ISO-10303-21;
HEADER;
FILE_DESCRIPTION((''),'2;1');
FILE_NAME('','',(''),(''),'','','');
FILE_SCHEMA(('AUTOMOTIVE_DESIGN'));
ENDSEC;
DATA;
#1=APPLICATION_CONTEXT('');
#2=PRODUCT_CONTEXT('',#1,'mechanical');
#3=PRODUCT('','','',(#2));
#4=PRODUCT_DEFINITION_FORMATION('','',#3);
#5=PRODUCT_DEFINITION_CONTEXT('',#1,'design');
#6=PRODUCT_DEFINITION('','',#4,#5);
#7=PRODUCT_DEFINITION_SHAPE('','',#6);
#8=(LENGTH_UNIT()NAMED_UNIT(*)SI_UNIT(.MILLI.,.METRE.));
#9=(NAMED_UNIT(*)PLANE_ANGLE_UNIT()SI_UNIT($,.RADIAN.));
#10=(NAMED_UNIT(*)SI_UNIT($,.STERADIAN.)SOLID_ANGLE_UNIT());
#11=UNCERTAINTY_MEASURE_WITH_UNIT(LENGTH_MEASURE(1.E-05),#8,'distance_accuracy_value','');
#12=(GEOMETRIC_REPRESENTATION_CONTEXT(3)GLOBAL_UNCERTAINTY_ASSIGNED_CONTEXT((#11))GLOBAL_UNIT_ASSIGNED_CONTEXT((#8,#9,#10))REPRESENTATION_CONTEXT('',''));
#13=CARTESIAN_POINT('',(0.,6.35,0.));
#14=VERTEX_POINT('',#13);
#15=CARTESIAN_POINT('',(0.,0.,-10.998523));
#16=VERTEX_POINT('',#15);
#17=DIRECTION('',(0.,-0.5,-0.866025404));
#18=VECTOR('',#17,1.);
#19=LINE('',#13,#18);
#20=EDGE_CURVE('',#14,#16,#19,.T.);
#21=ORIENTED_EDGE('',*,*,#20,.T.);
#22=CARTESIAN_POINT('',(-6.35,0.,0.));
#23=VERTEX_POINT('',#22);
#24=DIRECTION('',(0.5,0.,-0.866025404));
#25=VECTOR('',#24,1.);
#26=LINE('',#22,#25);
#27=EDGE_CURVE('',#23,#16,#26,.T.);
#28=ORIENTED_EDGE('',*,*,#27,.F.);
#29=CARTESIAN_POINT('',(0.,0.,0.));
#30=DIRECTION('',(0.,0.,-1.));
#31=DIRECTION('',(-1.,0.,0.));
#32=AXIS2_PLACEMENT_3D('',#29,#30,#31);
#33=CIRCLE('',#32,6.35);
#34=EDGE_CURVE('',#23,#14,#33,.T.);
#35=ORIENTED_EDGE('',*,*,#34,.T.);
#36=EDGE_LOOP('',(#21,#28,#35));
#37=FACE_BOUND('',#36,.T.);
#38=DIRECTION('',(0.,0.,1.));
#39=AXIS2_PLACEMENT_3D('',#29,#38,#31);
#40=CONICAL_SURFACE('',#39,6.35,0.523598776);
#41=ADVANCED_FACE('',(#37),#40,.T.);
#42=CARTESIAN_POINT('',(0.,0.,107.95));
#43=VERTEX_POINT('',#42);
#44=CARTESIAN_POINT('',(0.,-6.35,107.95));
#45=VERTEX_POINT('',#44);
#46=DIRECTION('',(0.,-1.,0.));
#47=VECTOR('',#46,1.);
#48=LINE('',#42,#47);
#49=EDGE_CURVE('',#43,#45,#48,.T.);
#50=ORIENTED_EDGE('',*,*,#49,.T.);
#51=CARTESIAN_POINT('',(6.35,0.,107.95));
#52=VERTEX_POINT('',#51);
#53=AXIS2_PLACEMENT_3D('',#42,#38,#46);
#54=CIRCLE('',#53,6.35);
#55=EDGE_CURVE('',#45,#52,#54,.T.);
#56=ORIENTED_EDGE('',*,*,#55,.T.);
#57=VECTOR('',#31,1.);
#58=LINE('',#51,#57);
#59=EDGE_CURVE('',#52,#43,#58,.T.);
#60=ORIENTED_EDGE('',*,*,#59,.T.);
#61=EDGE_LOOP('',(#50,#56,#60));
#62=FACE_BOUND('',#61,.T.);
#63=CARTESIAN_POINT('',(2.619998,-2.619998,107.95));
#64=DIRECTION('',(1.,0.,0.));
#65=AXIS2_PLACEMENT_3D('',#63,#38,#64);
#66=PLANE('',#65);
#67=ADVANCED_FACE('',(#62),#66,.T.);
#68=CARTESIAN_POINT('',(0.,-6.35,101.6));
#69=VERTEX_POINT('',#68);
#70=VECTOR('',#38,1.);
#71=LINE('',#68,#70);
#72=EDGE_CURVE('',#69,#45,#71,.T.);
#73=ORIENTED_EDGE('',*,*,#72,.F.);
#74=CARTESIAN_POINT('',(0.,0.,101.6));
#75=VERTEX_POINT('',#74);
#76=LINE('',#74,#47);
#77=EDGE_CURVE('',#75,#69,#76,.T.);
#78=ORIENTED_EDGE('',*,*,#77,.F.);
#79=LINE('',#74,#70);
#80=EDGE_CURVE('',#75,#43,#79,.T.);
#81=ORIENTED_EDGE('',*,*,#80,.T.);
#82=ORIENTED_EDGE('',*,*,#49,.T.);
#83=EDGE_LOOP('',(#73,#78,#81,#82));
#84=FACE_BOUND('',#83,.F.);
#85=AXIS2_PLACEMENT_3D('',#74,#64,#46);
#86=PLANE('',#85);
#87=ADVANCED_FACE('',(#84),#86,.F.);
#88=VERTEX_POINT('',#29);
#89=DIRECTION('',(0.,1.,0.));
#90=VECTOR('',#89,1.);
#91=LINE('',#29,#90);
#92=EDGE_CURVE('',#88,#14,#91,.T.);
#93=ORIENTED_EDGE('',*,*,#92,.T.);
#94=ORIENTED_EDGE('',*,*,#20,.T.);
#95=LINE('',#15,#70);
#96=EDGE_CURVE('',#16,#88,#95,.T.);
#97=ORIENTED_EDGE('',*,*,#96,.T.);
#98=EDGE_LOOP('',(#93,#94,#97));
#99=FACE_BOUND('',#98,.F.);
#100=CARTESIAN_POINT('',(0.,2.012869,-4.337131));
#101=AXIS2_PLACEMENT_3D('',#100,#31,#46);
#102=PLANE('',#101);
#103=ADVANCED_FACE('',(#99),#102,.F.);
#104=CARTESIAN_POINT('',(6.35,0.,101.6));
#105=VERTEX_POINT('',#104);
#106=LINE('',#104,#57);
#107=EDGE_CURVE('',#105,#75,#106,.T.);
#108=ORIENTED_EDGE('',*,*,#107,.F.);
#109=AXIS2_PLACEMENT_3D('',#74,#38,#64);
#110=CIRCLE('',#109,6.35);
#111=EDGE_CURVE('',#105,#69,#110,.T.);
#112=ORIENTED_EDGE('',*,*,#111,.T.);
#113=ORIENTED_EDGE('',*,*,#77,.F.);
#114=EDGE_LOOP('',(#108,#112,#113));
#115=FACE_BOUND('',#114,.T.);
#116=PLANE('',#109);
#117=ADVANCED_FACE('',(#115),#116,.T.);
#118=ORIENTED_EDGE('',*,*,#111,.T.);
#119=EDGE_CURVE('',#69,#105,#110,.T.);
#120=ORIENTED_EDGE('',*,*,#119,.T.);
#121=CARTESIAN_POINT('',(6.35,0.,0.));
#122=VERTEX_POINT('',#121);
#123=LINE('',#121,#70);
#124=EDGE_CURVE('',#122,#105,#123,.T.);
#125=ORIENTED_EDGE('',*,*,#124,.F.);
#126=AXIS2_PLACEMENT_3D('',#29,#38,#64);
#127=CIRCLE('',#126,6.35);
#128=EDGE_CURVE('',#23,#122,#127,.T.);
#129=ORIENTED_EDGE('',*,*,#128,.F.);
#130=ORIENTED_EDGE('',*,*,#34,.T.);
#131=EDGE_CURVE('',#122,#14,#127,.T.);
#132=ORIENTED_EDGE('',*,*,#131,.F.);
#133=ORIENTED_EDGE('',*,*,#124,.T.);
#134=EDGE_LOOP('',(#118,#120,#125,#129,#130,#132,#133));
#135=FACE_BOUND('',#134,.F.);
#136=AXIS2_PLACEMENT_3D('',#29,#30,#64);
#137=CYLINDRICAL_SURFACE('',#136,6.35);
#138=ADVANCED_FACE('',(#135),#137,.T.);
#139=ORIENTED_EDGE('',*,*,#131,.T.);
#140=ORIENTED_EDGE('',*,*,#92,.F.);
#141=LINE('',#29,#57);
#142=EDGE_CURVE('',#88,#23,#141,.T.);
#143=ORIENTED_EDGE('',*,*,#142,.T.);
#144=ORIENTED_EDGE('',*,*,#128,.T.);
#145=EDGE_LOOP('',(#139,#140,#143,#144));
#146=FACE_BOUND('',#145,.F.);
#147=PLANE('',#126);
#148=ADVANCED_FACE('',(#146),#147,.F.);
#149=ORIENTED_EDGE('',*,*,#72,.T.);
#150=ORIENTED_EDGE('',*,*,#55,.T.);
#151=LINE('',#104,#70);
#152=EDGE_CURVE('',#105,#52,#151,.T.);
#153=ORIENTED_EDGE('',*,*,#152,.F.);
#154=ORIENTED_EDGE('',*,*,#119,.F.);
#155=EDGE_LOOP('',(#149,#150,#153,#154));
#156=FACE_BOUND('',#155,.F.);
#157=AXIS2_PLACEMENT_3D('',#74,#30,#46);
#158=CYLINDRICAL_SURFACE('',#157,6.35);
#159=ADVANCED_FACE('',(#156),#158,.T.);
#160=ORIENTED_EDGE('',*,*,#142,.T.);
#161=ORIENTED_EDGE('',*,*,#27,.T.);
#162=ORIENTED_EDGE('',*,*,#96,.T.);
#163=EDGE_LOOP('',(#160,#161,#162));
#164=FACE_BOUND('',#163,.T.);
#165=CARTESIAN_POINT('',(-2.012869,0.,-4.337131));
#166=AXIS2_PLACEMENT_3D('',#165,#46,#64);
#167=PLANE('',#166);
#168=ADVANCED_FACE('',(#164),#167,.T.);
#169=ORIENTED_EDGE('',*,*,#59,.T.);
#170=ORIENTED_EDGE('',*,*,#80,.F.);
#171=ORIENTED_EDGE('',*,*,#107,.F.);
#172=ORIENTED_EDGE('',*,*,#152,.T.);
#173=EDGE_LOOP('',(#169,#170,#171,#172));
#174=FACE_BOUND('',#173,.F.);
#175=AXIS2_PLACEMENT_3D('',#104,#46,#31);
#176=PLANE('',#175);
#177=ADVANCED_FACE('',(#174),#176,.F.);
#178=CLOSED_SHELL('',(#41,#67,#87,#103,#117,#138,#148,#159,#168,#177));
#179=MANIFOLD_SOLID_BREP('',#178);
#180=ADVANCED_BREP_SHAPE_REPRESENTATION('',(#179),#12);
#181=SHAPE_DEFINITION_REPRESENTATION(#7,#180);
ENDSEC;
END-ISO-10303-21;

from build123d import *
from build123d import SkipClean  # not in build123d's __all__

# Parameters (mm, degrees)
F1_ANGLE = 90
F2_R     = 6.35
F3_DEPTH = 101.6
F5_DEPTH = 6.35


with BuildPart() as f1:
    # F0 (on Front) → F1 (revolve)
    with BuildSketch(Plane.XZ):
        Polygon((0, -10.9985226281), (0, 0), (-6.35, 0), align=None)
    revolve(axis=Axis((0, 0, -5.499261314), (0, 0, -1)), revolution_arc=F1_ANGLE)

    # F2 (on face) → F3 (join)
    with BuildSketch(Plane.XY):
        Circle(F2_R)
    extrude(amount=F3_DEPTH)

    # F4 (on face) → F5 (join)
    with BuildSketch(Plane.XY.offset(101.6)):
        with BuildLine():
            ThreePointArc((0, -6.35), (4.4901280605, -4.4901280605), (6.35, 0))
            Line((6.35, 0), (0, 0))
            Line((0, 0), (0, -6.35))
        make_face()
    with SkipClean():  # cleaning this boolean's faces spoils the solid; the shape is the same uncleaned
        extrude(amount=F5_DEPTH)


solid = f1.part
